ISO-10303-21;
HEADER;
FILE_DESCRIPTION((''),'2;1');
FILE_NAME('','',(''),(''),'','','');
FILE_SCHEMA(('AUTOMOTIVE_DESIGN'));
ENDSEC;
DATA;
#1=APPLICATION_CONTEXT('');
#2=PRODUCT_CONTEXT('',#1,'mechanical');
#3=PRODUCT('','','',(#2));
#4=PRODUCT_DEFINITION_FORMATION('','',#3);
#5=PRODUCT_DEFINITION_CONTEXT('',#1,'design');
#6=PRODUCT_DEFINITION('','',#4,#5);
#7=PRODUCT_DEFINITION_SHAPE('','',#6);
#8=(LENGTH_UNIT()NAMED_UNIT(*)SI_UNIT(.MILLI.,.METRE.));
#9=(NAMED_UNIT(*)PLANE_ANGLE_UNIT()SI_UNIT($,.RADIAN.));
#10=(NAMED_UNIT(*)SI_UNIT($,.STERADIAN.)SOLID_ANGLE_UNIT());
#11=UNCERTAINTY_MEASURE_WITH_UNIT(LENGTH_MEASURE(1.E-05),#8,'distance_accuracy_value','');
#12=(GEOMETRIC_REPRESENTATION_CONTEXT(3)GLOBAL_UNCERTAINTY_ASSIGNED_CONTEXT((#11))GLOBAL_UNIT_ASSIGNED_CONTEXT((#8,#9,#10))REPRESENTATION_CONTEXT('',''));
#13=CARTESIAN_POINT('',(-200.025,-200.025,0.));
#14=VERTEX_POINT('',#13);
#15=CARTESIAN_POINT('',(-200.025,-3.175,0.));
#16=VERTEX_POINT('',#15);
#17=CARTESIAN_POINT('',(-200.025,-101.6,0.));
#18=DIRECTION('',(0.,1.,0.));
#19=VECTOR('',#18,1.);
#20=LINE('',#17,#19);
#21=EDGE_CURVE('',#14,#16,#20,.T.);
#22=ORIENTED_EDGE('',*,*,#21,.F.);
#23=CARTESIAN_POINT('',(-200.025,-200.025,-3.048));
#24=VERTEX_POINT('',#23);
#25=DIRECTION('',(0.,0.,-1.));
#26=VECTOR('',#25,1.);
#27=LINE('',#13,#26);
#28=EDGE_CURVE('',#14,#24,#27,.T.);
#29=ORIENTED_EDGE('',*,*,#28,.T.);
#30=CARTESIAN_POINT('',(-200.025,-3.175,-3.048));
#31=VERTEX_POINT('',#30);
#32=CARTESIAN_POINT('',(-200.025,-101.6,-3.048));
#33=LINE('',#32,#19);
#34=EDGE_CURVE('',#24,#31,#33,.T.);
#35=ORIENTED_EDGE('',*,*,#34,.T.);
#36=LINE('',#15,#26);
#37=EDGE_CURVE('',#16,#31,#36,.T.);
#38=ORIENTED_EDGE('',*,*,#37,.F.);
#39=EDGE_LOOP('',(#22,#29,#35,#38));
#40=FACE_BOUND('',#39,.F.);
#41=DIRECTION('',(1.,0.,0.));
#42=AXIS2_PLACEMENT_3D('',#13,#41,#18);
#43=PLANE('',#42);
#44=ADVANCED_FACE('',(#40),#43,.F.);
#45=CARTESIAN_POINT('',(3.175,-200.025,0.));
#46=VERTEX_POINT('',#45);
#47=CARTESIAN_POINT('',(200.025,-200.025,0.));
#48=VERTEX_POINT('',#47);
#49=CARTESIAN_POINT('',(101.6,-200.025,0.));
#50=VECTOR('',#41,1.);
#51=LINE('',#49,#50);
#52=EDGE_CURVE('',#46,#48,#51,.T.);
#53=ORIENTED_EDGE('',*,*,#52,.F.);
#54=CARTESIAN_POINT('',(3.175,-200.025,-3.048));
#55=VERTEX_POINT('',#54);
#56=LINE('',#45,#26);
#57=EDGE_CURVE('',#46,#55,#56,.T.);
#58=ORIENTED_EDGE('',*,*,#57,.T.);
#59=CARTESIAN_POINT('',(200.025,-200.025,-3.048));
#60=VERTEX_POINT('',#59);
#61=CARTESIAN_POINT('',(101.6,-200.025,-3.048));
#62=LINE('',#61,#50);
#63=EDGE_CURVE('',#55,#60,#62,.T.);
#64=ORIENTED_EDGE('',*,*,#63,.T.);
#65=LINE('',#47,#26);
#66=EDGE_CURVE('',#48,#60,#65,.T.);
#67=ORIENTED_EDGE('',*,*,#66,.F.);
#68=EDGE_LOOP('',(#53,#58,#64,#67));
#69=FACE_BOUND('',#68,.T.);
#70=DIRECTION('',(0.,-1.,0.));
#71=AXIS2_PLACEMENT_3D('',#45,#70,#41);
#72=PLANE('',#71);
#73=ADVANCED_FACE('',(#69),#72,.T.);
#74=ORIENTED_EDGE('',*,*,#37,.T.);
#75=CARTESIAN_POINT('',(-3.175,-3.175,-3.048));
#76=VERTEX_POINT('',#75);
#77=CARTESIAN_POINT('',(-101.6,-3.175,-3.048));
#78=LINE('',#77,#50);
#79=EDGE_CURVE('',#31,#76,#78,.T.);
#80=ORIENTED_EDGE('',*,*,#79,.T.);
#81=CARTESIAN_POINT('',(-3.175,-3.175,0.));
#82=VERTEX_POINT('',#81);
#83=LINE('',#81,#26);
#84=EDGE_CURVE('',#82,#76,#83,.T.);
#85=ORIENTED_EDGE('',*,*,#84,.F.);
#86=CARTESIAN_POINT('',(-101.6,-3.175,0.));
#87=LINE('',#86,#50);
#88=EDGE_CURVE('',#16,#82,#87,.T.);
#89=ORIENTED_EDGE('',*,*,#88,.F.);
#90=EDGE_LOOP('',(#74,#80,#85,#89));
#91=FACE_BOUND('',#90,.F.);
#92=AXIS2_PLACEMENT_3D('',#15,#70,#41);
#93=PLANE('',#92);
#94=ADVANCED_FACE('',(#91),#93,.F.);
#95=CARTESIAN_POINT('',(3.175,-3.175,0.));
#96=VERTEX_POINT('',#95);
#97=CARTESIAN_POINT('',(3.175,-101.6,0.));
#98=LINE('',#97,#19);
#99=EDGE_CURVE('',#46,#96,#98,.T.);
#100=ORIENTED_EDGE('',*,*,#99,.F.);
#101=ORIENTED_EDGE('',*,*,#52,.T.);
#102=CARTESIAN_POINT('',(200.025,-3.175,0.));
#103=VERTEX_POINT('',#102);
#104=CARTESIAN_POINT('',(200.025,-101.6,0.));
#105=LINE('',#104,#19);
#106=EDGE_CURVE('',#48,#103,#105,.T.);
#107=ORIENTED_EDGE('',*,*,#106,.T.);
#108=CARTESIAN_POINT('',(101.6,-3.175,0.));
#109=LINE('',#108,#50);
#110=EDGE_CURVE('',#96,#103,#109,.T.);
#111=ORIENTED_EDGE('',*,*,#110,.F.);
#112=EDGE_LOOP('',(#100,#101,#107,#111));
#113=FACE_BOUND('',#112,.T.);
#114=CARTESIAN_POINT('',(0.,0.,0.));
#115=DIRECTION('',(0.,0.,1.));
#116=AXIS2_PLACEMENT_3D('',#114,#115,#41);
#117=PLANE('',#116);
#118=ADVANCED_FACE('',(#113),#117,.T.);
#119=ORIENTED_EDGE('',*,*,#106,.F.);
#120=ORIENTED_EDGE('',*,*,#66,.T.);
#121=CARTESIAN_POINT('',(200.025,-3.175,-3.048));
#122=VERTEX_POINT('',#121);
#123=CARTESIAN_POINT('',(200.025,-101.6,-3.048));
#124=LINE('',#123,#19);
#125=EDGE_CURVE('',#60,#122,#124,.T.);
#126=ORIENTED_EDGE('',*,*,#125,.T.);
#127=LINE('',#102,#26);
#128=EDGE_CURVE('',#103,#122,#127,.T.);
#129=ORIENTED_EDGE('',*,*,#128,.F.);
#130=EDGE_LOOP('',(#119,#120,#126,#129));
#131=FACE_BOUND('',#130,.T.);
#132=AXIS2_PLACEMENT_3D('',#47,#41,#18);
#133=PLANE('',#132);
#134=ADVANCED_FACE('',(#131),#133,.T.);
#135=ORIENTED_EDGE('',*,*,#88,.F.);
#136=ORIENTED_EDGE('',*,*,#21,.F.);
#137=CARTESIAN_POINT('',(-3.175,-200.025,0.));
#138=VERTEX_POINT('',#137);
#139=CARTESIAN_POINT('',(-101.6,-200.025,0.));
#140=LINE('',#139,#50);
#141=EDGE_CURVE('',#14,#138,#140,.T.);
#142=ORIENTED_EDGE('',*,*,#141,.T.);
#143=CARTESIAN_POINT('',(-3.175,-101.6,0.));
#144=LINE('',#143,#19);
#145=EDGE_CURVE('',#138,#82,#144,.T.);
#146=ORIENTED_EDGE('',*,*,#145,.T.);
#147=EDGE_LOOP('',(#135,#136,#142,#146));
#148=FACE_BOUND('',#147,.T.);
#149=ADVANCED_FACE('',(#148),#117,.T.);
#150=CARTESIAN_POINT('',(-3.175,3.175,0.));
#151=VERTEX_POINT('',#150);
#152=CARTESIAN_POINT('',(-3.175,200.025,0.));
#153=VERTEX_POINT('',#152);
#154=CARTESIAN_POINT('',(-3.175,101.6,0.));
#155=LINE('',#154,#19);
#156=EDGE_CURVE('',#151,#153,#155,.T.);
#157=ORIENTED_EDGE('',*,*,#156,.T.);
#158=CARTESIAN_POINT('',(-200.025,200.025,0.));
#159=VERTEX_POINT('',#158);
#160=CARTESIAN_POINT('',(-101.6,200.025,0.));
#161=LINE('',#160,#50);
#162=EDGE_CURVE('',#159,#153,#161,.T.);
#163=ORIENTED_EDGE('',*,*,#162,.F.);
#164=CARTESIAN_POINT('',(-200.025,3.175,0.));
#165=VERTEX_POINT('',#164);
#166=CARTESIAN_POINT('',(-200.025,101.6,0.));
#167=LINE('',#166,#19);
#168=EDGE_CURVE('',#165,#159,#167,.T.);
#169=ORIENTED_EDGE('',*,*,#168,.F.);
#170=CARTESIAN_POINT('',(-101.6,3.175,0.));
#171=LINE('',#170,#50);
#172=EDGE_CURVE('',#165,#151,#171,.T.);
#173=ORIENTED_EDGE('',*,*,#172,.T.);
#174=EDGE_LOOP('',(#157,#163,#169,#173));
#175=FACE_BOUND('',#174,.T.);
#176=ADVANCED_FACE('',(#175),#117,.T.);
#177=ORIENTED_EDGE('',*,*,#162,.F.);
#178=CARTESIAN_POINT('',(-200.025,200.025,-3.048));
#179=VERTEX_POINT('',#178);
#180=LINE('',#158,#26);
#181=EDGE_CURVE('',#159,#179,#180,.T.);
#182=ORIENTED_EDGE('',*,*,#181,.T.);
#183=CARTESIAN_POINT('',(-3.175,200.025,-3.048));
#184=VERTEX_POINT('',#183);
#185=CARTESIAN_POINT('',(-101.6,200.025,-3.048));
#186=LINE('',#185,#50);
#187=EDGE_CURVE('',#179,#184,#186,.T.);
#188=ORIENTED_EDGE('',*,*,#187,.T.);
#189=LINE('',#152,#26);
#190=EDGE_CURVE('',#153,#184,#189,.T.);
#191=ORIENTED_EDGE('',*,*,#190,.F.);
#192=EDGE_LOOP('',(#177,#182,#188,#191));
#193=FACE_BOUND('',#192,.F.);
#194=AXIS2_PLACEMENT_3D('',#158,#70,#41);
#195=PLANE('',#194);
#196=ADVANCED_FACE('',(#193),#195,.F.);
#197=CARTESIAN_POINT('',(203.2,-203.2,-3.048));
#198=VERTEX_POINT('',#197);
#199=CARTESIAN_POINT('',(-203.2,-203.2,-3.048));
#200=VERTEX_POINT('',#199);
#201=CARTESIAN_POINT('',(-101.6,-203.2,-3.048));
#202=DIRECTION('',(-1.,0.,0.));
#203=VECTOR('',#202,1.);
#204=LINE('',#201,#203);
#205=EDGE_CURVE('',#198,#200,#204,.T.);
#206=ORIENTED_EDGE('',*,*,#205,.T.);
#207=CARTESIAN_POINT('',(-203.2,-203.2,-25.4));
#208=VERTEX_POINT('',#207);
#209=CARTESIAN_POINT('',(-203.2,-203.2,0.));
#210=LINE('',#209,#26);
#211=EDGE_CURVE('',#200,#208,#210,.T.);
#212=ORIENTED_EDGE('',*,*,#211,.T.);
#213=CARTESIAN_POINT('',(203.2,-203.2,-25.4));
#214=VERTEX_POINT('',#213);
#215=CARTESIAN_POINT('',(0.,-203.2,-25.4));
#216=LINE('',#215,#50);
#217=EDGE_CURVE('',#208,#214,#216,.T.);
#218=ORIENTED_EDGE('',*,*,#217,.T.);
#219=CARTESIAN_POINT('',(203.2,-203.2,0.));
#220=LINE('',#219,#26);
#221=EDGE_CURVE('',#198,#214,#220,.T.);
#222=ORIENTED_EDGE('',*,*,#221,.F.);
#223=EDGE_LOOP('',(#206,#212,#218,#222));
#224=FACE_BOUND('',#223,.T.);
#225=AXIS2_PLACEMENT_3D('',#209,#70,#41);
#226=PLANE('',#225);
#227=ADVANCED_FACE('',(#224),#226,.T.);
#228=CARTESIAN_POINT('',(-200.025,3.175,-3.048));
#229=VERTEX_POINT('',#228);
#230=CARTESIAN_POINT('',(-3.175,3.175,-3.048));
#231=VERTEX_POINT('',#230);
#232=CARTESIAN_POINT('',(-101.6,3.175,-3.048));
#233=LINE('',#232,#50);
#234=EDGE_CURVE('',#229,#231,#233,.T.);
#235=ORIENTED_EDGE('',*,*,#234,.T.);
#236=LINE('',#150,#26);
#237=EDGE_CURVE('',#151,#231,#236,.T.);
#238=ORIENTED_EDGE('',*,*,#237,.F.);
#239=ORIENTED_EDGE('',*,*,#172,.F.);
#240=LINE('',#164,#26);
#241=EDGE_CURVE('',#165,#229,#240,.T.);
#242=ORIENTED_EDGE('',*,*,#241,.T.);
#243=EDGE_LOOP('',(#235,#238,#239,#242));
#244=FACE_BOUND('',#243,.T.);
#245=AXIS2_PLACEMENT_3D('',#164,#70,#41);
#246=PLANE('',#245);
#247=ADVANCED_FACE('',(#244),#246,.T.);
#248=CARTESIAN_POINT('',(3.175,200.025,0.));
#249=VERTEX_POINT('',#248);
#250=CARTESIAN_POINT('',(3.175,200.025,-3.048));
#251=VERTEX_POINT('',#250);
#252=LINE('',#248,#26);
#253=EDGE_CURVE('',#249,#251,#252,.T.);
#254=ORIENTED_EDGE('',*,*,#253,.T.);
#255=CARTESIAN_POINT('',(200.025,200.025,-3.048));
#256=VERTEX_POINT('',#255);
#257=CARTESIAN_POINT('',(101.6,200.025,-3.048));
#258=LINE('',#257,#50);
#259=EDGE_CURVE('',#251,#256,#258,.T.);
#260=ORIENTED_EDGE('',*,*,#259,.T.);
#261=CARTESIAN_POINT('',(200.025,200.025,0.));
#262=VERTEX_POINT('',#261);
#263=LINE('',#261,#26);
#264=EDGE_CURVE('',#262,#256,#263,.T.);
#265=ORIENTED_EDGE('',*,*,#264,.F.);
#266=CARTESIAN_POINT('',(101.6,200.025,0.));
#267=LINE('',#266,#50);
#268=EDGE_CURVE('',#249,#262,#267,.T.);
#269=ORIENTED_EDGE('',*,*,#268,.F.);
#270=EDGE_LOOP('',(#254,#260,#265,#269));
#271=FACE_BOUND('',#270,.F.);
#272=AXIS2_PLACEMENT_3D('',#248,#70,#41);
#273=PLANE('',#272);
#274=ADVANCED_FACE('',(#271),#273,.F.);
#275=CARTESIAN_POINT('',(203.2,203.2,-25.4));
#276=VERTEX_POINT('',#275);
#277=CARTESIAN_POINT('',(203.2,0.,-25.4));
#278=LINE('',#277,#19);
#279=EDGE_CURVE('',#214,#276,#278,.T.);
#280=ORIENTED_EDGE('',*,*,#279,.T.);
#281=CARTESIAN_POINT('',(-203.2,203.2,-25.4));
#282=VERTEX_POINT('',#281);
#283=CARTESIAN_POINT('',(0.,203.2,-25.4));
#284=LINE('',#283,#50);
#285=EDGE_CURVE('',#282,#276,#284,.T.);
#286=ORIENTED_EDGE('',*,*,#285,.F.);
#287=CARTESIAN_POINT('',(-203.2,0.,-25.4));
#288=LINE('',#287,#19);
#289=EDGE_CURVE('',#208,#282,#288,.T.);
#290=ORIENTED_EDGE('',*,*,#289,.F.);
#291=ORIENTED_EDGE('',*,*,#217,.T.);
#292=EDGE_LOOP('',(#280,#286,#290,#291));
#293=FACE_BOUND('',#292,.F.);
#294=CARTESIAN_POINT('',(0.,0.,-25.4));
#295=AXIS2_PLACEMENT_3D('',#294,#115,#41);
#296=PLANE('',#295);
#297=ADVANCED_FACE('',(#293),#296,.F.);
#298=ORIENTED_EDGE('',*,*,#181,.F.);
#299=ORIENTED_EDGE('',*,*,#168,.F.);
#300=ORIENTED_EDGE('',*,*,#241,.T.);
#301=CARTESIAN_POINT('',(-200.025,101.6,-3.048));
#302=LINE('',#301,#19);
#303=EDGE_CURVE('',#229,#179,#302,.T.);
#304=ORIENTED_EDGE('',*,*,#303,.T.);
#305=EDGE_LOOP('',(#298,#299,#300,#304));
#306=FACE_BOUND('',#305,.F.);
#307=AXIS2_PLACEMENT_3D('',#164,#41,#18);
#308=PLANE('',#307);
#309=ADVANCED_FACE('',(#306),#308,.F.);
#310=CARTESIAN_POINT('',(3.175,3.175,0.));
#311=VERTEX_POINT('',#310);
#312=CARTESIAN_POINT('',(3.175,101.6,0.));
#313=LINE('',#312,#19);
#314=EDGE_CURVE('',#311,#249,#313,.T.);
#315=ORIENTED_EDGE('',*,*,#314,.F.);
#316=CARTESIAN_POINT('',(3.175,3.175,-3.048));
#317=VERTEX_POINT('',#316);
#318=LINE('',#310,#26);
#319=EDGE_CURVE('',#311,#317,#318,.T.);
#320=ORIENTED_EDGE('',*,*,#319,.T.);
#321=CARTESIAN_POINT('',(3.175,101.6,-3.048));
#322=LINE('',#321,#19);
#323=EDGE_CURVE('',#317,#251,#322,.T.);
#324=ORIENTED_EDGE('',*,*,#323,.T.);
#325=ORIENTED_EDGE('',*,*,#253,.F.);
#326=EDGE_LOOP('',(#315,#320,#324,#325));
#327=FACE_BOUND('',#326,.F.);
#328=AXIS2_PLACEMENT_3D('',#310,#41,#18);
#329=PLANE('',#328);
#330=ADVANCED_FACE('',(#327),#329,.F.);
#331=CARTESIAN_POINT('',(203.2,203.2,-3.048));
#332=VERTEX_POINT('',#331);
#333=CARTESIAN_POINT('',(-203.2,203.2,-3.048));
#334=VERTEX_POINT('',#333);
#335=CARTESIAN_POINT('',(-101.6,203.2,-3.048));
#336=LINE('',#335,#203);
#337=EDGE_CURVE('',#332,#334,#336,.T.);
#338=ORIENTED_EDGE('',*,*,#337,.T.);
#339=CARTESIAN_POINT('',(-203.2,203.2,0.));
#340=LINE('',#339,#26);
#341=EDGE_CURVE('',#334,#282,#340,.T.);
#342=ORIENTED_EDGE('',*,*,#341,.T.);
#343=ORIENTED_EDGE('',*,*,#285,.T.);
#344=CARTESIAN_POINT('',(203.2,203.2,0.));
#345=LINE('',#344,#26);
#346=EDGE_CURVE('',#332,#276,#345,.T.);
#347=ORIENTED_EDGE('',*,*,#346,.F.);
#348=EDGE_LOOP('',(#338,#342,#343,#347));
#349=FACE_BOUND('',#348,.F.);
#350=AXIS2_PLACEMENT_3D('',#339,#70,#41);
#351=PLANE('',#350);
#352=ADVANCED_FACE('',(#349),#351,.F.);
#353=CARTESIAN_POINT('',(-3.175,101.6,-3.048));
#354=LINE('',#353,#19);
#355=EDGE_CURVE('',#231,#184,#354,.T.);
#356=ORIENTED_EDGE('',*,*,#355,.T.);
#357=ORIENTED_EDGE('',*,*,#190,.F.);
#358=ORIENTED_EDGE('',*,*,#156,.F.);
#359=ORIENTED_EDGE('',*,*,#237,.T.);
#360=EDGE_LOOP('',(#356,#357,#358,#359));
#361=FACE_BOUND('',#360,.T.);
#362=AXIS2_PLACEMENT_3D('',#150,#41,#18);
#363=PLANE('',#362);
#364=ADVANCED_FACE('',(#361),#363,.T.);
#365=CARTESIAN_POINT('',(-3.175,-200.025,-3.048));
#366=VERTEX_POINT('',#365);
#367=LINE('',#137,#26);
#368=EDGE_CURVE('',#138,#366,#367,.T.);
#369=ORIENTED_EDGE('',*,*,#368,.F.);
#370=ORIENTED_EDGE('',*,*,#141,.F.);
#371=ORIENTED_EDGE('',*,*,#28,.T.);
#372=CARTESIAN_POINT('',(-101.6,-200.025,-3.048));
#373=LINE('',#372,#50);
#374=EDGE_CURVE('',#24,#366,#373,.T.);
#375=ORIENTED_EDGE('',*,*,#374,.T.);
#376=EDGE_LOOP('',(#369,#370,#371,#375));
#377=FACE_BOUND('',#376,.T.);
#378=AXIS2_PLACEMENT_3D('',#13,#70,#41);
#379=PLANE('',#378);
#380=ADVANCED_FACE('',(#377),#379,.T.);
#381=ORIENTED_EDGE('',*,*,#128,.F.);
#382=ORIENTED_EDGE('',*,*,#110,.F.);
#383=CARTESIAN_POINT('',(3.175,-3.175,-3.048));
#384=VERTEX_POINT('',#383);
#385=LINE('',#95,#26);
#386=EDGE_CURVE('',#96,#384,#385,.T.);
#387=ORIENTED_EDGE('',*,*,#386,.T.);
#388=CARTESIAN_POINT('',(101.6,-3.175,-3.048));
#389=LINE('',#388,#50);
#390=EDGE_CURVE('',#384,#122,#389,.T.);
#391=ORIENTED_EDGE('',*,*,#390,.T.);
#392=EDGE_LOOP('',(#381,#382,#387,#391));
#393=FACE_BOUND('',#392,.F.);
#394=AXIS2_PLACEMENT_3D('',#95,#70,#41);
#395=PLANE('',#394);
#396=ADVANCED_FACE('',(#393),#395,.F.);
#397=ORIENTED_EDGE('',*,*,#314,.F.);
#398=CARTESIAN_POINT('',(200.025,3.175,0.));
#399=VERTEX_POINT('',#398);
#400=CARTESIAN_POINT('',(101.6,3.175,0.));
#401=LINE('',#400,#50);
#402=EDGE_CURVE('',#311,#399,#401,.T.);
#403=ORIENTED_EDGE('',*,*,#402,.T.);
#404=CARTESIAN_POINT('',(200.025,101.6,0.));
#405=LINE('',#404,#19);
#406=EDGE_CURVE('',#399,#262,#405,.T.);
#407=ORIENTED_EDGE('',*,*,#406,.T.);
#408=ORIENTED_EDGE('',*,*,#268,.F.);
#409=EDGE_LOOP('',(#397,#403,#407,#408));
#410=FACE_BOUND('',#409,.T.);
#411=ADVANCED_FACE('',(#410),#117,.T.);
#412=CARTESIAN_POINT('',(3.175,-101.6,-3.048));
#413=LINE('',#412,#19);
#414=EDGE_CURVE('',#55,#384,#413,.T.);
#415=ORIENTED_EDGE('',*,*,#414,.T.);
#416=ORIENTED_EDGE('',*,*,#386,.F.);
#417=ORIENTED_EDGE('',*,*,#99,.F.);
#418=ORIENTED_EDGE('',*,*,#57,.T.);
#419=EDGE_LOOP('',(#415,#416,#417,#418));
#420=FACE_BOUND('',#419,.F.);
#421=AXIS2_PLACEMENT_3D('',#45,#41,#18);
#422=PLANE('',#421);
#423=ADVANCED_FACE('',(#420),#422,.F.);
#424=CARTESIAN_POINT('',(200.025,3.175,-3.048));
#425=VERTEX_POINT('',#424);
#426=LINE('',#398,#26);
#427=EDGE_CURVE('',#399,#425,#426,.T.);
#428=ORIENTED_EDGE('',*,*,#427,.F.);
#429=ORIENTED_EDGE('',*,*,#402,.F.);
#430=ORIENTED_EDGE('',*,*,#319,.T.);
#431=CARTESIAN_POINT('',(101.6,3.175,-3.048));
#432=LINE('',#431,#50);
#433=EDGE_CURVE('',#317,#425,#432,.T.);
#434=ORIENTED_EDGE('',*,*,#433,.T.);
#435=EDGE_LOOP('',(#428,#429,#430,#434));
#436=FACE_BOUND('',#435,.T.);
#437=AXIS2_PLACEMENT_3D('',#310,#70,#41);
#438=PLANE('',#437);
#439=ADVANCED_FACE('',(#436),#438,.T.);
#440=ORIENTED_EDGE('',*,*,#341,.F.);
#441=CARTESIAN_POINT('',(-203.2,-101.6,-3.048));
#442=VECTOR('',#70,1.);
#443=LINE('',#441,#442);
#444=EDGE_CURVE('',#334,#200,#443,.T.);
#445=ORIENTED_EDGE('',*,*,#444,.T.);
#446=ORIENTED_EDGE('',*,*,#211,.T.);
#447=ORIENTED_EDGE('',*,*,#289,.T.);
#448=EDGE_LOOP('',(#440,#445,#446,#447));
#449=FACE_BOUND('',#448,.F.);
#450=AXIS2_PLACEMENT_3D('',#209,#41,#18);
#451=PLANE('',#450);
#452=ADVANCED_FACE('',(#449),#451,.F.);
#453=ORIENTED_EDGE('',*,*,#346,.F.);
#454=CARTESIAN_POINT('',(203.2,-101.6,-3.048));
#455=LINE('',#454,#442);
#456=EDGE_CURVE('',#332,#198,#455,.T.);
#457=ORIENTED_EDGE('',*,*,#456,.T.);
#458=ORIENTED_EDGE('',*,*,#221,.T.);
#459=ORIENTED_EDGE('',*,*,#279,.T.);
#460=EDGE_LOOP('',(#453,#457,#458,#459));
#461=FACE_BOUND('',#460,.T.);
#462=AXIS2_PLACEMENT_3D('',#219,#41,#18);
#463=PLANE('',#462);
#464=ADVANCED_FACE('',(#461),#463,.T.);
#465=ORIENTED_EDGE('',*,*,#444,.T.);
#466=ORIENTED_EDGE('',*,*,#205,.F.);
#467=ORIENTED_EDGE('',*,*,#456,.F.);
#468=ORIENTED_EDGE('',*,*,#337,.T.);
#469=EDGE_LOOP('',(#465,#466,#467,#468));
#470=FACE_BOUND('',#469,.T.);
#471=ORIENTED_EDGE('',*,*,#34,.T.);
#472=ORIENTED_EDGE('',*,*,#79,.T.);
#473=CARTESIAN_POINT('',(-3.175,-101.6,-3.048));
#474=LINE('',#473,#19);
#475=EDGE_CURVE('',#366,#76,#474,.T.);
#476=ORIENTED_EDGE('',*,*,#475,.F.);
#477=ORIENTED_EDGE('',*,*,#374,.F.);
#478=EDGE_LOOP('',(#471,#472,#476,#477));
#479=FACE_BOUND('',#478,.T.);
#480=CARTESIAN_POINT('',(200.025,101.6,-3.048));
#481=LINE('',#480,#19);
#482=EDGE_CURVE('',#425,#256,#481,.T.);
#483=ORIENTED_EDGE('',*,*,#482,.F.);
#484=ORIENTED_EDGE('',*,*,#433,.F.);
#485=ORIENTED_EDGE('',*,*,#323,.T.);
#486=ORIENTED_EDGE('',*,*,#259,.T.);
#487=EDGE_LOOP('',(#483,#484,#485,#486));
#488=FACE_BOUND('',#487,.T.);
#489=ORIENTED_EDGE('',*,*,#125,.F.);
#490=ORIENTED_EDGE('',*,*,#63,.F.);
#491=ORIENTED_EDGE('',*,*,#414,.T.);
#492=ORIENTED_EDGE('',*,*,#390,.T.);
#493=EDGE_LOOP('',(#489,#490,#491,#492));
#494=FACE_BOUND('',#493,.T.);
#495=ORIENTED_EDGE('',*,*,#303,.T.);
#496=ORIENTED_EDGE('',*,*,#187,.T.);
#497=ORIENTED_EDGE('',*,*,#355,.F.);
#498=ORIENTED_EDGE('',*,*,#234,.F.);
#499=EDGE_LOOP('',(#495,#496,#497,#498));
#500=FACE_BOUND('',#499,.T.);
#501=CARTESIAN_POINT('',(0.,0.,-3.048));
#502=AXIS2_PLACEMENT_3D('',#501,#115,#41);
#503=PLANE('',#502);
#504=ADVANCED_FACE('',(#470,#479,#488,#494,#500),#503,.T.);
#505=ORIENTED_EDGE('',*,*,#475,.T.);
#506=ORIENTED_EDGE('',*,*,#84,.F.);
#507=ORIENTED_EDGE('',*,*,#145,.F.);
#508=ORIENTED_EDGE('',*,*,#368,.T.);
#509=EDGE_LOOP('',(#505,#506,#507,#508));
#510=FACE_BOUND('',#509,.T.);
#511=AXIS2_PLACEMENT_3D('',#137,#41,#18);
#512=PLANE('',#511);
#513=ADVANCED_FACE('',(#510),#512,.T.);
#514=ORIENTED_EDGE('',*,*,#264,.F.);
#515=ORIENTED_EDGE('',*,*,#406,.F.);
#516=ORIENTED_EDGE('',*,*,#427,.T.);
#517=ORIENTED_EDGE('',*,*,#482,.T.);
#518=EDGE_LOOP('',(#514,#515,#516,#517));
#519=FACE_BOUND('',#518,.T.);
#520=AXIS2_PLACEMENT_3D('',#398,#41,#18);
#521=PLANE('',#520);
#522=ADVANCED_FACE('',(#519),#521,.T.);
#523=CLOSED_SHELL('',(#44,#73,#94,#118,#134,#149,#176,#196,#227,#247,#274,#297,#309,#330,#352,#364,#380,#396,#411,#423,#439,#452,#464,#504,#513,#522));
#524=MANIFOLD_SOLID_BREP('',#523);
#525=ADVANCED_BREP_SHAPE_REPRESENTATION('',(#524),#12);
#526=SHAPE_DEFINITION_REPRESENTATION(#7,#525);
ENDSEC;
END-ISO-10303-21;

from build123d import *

# Parameters (mm, degrees)
F0_W     = 406.4
F0_H     = 406.4
F1_DEPTH = 25.4
F2_W     = 425.3633022308
F2_H     = 428.5580217838
F2_W_2   = 196.85
F2_H_2   = 196.85
F3_DEPTH = 3.048


# Not quite as in the source:
# - a feature names something its author has since deleted; it is built from what else it names


with BuildPart() as f1:
    # F0 (on Top) → F1 (new body)
    with BuildSketch(Plane.XY):
        Rectangle(F0_W, F0_H)
    extrude(amount=-F1_DEPTH)

    # F2 (on Top) → F3 (cut)
    with BuildSketch(Plane.XY):
        Rectangle(F2_W, F2_H)
        with Locations((-101.6, -101.6)):
            Rectangle(F2_W_2, F2_H_2, mode=Mode.SUBTRACT)
        with Locations((101.6, -101.6)):
            Rectangle(F2_W_2, F2_H_2, mode=Mode.SUBTRACT)
        with Locations((-101.6, 101.6)):
            Rectangle(F2_W_2, F2_H_2, mode=Mode.SUBTRACT)
        with Locations((101.6, 101.6)):
            Rectangle(F2_W_2, F2_H_2, mode=Mode.SUBTRACT)
    extrude(amount=-F3_DEPTH, mode=Mode.SUBTRACT)


solid = f1.part
